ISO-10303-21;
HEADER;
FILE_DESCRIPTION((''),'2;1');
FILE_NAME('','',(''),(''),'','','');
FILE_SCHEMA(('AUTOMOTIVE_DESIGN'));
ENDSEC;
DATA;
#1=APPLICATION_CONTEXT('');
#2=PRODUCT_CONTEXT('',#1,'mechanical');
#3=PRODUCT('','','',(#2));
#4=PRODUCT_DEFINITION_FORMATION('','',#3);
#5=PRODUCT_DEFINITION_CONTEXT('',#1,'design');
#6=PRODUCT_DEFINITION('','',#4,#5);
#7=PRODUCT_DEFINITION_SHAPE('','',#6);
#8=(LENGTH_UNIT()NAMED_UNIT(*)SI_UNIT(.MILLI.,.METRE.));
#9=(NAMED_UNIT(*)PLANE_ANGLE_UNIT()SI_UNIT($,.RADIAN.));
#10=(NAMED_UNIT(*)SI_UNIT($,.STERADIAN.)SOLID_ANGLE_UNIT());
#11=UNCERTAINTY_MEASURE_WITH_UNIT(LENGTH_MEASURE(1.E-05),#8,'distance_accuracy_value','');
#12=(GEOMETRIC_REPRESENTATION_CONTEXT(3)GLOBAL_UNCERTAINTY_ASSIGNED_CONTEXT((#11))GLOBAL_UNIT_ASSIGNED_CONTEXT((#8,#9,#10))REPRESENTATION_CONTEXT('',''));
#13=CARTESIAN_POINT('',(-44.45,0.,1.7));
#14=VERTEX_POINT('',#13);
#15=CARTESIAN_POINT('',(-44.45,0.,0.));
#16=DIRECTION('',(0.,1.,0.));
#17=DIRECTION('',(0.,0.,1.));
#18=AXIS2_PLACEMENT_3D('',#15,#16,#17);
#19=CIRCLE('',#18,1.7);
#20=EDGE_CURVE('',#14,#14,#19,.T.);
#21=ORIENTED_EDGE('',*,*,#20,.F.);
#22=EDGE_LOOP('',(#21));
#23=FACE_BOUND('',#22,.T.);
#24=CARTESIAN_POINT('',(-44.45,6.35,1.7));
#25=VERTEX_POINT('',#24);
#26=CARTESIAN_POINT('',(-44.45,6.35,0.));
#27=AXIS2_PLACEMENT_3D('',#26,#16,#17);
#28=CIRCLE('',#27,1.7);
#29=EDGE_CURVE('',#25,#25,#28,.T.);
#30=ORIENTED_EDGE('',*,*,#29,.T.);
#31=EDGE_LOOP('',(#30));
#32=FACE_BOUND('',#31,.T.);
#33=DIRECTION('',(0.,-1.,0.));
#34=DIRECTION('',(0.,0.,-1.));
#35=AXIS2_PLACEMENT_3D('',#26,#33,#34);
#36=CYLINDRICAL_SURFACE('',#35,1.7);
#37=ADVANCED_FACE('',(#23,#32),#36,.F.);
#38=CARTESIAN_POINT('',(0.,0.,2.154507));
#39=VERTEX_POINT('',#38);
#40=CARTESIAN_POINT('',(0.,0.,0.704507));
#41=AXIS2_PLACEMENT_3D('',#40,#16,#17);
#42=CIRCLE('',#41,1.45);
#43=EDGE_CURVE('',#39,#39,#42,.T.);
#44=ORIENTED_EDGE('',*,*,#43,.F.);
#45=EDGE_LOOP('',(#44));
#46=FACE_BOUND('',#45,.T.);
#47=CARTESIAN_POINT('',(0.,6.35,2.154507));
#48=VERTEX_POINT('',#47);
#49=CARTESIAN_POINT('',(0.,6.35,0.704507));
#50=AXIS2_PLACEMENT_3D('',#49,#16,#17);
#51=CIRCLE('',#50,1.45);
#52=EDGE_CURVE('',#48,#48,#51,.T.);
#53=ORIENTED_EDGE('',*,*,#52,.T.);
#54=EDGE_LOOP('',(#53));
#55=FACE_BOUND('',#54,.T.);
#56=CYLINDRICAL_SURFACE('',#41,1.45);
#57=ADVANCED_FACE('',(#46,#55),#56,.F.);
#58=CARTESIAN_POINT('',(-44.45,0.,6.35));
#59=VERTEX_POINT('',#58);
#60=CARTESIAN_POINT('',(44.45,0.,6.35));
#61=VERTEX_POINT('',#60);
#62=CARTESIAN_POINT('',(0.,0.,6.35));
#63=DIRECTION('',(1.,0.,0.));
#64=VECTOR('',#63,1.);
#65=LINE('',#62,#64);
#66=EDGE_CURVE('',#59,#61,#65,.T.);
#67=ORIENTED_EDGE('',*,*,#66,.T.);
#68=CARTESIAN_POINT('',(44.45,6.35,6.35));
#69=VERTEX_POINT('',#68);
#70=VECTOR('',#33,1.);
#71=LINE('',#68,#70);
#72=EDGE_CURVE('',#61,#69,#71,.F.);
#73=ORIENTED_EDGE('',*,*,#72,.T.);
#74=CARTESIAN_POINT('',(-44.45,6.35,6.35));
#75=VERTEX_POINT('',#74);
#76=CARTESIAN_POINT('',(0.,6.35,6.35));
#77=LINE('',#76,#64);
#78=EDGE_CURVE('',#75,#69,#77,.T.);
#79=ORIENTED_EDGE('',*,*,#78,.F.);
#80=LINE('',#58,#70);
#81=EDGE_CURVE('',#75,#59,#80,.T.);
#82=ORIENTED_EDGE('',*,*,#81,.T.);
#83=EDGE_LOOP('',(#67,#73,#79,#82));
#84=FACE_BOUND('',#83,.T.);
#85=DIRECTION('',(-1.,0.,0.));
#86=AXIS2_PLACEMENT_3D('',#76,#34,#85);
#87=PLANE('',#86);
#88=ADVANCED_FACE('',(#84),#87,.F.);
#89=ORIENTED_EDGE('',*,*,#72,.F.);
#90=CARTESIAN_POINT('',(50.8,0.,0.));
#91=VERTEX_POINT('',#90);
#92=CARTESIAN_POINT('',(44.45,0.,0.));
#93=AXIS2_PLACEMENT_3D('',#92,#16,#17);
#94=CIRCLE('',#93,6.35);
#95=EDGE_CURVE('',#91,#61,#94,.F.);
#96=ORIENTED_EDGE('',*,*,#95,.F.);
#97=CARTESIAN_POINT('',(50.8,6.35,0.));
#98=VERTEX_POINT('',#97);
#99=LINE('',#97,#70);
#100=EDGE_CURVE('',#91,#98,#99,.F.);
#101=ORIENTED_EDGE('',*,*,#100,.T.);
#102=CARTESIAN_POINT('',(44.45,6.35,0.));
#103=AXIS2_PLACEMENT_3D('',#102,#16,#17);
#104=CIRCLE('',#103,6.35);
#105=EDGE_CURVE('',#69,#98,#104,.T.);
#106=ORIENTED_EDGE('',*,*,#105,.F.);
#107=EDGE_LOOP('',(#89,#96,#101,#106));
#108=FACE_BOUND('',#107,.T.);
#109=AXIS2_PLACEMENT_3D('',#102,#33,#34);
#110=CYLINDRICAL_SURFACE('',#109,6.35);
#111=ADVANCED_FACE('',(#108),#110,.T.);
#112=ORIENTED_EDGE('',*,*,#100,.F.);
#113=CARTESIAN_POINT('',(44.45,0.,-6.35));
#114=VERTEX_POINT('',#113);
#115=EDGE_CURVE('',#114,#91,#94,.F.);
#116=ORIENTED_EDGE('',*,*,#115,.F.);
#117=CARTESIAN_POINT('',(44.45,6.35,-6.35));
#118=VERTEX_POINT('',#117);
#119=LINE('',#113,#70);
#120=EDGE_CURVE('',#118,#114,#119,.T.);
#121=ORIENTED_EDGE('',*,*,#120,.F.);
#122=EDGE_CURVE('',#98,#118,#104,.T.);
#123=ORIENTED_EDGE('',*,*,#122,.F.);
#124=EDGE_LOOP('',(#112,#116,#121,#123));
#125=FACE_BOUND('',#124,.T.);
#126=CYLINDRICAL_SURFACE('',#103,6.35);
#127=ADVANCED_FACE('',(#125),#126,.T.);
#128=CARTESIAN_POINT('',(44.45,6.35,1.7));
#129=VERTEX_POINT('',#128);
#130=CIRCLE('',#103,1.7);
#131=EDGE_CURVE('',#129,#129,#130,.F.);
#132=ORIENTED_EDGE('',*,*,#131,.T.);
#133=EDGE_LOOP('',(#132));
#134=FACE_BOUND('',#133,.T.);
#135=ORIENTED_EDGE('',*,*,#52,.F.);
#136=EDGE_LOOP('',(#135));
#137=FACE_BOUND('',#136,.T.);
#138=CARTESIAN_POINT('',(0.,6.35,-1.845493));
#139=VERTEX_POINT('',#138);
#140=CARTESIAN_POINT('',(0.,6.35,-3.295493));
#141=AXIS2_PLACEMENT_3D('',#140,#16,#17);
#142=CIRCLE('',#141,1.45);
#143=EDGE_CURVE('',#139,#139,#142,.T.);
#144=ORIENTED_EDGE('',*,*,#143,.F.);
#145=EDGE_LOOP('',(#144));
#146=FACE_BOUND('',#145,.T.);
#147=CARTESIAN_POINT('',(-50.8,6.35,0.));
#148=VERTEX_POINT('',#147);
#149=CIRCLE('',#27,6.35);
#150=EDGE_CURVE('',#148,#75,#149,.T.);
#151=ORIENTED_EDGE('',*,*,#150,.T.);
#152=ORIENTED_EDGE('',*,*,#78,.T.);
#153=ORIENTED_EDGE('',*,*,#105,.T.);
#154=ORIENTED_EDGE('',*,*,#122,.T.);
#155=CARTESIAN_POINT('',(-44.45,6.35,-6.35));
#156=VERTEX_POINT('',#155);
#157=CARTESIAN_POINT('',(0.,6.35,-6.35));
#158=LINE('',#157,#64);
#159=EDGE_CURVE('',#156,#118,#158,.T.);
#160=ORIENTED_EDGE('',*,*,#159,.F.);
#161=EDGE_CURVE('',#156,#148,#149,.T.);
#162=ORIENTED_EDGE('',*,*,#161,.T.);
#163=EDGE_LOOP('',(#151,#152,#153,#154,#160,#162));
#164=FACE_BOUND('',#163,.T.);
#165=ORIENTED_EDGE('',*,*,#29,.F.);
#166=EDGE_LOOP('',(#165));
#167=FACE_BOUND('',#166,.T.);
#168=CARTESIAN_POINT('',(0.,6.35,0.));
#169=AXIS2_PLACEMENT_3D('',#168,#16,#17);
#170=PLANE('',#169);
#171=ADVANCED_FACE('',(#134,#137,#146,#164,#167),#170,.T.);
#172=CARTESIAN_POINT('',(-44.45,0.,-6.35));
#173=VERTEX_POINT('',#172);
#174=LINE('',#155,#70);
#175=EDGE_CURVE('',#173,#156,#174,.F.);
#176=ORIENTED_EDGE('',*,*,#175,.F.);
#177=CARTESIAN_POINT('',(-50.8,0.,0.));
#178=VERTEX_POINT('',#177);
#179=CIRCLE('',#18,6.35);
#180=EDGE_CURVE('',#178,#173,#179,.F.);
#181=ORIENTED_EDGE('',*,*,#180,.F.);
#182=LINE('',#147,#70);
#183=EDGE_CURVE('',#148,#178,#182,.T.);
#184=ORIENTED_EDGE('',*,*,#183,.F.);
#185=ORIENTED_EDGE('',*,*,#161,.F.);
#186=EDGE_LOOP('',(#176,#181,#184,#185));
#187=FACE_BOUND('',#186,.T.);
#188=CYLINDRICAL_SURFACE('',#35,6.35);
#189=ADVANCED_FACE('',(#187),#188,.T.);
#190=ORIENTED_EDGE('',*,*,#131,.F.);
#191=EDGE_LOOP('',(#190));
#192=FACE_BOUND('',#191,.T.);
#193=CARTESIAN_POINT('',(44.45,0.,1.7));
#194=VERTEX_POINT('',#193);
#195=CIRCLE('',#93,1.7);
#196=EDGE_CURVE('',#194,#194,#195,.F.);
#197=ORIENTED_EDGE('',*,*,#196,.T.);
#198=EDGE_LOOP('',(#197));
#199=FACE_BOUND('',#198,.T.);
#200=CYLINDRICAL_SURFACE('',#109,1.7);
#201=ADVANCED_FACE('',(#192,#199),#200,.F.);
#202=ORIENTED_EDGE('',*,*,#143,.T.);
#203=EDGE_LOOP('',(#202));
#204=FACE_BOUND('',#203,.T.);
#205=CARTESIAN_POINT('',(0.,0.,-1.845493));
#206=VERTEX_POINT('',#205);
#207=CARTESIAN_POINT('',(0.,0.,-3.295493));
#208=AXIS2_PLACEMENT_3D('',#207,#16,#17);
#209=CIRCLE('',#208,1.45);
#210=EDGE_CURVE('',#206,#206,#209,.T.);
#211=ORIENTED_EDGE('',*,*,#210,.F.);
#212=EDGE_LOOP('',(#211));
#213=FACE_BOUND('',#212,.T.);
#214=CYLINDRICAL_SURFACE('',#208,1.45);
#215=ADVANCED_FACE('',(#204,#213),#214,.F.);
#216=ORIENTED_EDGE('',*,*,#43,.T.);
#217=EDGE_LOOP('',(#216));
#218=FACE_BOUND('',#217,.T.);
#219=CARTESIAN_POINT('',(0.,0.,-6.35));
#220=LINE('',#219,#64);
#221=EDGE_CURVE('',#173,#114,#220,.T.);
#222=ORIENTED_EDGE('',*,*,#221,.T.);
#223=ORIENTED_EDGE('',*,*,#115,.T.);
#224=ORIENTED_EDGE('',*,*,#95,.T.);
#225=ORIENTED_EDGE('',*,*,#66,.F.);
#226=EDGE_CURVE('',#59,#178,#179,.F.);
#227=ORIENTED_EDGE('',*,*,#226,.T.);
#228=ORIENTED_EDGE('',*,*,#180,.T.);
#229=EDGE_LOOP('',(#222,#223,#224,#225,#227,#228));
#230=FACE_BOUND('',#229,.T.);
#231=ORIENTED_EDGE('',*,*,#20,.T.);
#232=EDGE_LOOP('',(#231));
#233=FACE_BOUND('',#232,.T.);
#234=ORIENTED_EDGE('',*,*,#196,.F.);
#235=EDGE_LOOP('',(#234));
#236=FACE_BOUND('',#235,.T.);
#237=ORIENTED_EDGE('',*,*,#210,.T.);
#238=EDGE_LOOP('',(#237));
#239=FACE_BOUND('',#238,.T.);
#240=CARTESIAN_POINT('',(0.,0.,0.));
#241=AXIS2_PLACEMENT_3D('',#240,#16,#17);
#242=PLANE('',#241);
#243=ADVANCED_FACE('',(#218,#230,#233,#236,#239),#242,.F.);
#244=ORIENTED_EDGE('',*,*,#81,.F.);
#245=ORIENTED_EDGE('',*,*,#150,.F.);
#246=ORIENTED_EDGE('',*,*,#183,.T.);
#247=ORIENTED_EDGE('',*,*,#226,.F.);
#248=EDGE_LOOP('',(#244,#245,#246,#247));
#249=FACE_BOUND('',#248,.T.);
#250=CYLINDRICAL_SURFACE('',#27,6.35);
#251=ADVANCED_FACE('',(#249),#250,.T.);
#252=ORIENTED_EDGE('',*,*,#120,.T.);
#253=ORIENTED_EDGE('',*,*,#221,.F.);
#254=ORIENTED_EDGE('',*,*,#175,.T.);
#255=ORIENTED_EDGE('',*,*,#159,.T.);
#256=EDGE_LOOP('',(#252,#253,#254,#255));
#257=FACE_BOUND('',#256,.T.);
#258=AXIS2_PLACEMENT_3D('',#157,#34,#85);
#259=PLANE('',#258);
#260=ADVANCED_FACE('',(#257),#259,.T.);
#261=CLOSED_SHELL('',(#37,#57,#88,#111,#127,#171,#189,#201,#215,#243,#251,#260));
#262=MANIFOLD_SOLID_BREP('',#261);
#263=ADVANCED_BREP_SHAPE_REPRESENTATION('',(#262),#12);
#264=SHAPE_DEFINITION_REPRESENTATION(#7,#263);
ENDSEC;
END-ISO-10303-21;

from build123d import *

# Parameters (mm, degrees)
SKETCH1_R               = 1.7
BOSS_EXTRUDE1_DEPTH     = 6.35
FILLET1_R               = 6.35
CUT_EXTRUDE1_DEPTH      = 52.587643869
CUT_EXTRUDE1_DEPTH_BACK = 52.587643869
SKETCH3_R               = 1.45


with BuildPart() as part:
    # Sketch1 → Boss-Extrude1 (new body)
    with BuildSketch(Plane(origin=(0, 0, 0), x_dir=(1, 0, 0), z_dir=(0, 1, 0))):
        Polygon((-50.8, 6.35), (-50.8, -6.35), (-6.35, -6.35), (6.35, -6.35), (50.8, -6.35), (50.8, 6.35), (6.35, 6.35), (-6.35, 6.35), align=None)
        with Locations(Location((-44.45, 0, 0), (0, 0, 270))):
            Circle(SKETCH1_R, mode=Mode.SUBTRACT)
        with Locations(Location((44.45, 0, 0), (0, 0, 270))):
            Circle(SKETCH1_R, mode=Mode.SUBTRACT)
    extrude(amount=BOSS_EXTRUDE1_DEPTH)

    # Fillet1
    fillet1_edges = [part.edges().sort_by_distance(p)[0] for p in [
        (50.8, 3.175, -6.35),
        (-50.8, 3.175, -6.35),
        (-50.8, 3.175, 6.35),
        (50.8, 3.175, 6.35),
    ]]
    fillet(fillet1_edges, radius=FILLET1_R - 0.0001)  # a hair under: the kernel refuses the full size

    # Sketch3 → Cut-Extrude1 (cut, two sides: drawn at the far end of the back side and taken through both)
    with BuildSketch(Plane(origin=(0, 6.35, 0), x_dir=(1, 0, 0), z_dir=(0, 1, 0)).offset(-CUT_EXTRUDE1_DEPTH_BACK)):
        with Locations(Location((0, -0.704506674, 0), (0, 0, 270))):
            Circle(SKETCH3_R)
        with Locations(Location((0, 3.295493326, 0), (0, 0, 270))):
            Circle(SKETCH3_R)
    extrude(amount=CUT_EXTRUDE1_DEPTH + CUT_EXTRUDE1_DEPTH_BACK, mode=Mode.SUBTRACT)


solid = part.part
